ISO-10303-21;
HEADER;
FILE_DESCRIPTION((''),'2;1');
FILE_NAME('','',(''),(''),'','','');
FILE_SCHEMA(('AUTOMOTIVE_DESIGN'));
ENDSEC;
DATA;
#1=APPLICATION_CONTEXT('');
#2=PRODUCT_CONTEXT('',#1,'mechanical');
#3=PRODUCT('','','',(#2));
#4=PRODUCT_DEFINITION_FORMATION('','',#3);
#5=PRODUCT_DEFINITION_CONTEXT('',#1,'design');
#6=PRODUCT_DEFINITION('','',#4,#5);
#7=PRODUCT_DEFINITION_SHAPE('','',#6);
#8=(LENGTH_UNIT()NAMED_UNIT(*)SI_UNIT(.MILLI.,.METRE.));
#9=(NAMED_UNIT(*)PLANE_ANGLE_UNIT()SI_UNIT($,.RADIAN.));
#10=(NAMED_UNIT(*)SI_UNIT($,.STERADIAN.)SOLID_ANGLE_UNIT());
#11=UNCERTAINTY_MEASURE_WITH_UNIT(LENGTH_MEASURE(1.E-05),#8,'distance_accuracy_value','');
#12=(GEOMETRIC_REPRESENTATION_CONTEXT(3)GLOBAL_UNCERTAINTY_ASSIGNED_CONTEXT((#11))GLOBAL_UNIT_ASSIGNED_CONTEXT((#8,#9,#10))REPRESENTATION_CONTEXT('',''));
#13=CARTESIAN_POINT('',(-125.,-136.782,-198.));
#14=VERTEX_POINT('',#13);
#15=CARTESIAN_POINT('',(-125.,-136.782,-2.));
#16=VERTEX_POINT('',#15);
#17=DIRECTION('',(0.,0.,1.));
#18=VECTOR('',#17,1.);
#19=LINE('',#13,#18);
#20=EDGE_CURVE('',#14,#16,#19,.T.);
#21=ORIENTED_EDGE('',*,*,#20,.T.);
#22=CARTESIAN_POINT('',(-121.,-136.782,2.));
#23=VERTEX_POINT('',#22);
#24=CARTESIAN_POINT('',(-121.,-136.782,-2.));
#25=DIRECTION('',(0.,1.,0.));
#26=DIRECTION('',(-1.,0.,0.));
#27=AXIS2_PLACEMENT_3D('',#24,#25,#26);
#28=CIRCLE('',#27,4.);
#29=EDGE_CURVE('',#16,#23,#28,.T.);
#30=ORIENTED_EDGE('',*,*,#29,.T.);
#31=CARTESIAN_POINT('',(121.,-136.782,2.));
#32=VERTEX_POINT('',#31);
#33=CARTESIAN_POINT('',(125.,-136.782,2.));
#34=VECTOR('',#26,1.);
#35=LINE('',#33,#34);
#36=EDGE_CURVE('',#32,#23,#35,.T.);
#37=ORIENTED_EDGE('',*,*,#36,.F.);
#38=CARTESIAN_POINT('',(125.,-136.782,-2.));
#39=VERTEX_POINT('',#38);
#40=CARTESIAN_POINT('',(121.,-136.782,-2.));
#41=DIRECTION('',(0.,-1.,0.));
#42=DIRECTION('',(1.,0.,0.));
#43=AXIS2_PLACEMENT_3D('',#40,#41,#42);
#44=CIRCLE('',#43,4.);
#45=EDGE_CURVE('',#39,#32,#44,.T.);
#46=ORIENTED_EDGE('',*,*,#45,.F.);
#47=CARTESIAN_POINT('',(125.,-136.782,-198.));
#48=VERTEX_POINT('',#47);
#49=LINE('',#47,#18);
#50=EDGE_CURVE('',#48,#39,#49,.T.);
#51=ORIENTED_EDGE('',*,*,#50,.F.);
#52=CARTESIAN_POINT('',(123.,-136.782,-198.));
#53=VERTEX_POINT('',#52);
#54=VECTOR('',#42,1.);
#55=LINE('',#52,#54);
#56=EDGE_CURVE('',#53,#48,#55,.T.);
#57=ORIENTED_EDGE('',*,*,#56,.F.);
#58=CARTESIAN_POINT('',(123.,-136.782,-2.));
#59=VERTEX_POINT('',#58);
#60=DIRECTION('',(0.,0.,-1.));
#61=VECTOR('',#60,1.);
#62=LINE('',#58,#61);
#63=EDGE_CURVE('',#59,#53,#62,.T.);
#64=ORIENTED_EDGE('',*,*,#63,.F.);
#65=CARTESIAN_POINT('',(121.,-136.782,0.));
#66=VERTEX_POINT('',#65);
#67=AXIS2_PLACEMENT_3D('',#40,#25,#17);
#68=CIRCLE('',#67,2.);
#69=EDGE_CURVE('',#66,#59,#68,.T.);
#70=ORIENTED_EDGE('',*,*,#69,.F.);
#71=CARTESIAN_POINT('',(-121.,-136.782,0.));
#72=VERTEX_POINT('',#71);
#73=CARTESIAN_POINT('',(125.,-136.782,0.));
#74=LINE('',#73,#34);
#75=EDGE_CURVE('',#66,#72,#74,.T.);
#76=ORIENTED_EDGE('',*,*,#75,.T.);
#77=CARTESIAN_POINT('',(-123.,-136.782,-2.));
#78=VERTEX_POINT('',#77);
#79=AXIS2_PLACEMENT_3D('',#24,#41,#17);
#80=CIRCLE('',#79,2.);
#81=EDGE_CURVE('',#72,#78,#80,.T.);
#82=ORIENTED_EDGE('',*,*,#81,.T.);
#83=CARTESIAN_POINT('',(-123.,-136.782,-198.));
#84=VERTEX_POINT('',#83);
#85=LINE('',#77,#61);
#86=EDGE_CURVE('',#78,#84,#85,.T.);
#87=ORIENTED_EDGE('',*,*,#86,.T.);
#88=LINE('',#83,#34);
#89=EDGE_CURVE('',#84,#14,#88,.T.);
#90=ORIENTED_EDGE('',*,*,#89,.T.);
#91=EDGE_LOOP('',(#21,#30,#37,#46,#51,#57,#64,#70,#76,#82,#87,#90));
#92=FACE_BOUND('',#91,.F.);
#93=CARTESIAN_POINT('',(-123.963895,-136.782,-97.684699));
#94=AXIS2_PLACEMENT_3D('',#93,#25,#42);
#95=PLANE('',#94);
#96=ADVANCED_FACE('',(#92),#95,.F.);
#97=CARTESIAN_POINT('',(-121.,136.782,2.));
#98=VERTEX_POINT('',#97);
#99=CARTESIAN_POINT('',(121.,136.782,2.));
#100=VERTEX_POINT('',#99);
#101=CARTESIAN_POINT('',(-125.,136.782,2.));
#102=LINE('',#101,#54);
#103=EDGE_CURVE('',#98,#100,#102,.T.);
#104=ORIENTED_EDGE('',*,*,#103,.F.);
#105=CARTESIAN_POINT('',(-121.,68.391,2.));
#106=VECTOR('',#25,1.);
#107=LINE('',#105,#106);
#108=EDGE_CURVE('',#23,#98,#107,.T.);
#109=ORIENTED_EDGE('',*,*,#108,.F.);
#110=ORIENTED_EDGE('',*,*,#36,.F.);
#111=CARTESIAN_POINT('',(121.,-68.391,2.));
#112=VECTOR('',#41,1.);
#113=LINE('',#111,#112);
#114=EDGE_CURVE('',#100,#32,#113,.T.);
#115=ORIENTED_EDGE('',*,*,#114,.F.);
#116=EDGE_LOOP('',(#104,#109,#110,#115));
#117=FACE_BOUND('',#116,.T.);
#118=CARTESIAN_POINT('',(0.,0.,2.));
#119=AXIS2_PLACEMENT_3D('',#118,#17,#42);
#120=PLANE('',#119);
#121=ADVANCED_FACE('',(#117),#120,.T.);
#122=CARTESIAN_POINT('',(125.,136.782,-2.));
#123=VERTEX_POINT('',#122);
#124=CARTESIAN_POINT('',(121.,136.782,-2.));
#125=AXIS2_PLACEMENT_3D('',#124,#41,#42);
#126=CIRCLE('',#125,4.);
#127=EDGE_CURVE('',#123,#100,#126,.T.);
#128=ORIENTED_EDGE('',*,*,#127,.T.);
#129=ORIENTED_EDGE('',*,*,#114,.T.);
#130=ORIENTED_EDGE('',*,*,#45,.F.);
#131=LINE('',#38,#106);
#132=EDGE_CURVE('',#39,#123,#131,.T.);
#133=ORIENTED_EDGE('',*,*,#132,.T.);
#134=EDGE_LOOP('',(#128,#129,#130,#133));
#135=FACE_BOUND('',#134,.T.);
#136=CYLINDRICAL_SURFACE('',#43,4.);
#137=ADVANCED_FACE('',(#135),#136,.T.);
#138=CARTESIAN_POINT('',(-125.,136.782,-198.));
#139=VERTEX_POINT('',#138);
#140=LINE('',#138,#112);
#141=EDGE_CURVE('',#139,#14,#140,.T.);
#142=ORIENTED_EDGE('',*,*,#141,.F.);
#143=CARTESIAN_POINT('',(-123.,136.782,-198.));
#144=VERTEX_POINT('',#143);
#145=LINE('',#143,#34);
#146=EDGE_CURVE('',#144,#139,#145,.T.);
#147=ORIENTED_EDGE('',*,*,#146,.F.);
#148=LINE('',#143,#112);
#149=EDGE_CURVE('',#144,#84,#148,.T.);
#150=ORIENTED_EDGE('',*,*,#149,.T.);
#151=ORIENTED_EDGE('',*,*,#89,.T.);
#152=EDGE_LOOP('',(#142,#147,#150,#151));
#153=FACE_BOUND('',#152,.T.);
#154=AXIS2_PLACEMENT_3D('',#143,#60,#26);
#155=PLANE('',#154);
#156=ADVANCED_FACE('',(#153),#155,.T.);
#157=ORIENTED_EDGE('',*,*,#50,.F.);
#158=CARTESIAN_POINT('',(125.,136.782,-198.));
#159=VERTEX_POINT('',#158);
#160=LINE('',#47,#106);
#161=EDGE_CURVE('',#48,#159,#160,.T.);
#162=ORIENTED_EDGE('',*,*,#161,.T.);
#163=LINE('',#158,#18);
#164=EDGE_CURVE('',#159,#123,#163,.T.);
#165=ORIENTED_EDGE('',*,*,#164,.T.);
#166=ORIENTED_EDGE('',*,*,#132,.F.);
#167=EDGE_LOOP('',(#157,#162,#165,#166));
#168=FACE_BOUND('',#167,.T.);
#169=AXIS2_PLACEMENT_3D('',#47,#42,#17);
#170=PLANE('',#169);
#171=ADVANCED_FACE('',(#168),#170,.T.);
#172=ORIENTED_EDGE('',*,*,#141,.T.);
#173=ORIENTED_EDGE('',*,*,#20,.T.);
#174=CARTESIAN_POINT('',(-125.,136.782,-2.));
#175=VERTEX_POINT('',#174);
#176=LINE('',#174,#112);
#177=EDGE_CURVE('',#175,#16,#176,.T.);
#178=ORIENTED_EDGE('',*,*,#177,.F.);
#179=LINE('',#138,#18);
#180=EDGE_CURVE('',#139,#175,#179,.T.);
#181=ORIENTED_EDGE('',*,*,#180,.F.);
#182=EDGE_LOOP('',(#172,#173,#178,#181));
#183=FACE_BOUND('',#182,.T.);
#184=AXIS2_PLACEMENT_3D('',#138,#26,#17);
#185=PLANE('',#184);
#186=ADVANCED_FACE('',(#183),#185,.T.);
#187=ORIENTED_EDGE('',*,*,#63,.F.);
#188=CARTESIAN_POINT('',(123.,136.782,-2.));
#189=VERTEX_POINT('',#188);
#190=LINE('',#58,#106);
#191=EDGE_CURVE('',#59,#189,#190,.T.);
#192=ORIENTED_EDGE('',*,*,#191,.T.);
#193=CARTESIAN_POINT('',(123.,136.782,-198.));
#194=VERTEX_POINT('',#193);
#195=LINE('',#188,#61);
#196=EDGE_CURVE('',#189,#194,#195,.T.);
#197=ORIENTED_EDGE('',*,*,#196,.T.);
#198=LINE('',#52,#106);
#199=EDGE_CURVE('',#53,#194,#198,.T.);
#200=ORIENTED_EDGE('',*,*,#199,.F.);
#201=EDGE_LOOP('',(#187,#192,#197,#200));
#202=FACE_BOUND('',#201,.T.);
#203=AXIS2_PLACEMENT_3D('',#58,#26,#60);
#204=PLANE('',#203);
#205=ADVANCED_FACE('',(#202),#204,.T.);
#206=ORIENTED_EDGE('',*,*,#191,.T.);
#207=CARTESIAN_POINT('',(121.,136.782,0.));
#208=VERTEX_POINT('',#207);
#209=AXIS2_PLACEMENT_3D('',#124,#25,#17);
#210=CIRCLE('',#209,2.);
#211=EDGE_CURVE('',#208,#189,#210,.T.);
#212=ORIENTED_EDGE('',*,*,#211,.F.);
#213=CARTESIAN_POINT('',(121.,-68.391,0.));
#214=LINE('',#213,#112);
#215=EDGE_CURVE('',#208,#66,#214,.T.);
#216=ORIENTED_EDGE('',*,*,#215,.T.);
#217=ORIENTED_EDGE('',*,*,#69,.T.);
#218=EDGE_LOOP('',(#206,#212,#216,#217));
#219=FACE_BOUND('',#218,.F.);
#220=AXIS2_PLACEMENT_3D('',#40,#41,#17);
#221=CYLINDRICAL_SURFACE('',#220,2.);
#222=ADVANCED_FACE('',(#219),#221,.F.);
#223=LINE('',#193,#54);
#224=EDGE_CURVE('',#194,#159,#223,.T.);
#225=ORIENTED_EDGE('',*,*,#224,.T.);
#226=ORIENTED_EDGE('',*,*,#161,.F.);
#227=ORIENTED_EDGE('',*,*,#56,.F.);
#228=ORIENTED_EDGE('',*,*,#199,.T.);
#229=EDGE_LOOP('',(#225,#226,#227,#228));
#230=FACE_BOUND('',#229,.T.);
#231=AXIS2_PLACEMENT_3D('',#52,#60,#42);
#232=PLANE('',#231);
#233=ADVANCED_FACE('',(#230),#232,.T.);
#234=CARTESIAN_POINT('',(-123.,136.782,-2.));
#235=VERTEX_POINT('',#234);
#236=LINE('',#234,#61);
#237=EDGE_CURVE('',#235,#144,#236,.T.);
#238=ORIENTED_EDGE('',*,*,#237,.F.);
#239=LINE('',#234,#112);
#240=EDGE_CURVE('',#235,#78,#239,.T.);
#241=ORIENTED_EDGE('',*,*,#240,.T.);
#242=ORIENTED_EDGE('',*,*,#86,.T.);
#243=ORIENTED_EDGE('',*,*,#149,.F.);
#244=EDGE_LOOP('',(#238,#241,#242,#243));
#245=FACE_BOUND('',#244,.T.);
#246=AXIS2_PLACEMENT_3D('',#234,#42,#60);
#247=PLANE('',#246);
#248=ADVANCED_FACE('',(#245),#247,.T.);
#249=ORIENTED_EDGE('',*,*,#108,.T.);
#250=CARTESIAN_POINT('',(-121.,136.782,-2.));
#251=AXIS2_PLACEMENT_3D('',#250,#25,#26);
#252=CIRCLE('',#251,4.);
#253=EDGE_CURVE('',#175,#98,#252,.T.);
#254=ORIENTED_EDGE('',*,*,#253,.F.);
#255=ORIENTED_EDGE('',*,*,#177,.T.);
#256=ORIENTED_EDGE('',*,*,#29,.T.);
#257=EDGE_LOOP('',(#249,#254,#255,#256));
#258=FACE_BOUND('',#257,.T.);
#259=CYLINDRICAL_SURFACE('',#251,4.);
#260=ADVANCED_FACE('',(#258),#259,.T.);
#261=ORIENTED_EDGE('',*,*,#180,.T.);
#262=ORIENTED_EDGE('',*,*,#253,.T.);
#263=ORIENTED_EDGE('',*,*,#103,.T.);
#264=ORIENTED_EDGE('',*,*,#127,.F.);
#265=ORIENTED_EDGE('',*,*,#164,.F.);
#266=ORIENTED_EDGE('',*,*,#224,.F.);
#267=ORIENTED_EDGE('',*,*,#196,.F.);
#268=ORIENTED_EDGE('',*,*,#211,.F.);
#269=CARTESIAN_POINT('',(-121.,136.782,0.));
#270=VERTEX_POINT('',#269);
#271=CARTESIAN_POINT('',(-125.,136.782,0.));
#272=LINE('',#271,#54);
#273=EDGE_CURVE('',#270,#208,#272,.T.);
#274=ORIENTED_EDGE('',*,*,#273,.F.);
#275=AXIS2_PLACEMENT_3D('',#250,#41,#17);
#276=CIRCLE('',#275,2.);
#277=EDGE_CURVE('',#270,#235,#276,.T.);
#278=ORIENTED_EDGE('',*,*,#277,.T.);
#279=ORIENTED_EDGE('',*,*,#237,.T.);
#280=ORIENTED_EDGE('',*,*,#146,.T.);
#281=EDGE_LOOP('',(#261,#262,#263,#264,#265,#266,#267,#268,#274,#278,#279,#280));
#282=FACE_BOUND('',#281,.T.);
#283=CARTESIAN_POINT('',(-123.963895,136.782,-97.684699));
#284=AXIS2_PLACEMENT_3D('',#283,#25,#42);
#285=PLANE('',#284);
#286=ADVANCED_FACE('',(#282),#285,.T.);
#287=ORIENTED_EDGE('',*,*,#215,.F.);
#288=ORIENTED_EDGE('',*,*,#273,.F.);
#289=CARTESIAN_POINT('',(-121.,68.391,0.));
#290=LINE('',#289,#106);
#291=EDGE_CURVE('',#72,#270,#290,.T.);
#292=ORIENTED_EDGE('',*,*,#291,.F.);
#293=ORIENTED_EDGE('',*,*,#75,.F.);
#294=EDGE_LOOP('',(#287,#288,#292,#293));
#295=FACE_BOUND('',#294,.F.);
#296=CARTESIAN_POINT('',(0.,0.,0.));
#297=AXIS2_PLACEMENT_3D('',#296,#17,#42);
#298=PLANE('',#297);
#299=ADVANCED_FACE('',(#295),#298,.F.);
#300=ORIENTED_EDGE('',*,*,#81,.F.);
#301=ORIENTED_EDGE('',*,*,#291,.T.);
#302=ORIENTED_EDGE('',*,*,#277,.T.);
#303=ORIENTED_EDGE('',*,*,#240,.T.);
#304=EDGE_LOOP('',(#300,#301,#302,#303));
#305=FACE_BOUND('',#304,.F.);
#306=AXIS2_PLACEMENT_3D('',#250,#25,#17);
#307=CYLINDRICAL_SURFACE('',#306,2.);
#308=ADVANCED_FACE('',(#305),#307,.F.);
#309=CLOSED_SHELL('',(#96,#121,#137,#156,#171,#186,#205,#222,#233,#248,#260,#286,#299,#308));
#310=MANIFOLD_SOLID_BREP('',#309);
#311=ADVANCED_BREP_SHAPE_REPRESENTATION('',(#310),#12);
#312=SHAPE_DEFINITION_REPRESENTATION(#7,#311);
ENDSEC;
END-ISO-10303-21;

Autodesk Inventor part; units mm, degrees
ref_plane "YZ Plane" through (0, 0, 0) normal (1, 0, 0) x (0, 1, 0)
ref_plane "XZ Plane" through (0, 0, 0) normal (0, 1, 0) x (-1, 0, 0)
ref_plane "XY Plane" through (0, 0, 0) normal (0, 0, 1) x (1, 0, 0)
sketch "Sketch1" plane through (0, 0, 0) normal (0, 0, 1) x (1, 0, 0)
  line L0 (125, -136.782) -> (-125, -136.782)
  line L1 (-125, -136.782) -> (-125, 136.782)
  line L2 (-125, 136.782) -> (125, 136.782)
  line L3 (125, 136.782) -> (125, -136.782)
  line L4 (125, -136.782) -> (-125, 136.782) construction
  line L5 (-125, -136.782) -> (125, 136.782) construction
  point P0 (0, 0)
  dimension "d1" = 250
extrude "Plate1" add sketch "Sketch1" along normal blind 2
sketch "Sketch2" plane through (123, -136.782, 2) normal (1, 0, 0) x (0, 1, 0)
  line L0 (273.5641, 0) -> (0, 0)
  line L1 (0, 0) -> (0, -200)
  line L2 (0, -200) -> (273.5641, -200)
  line L3 (273.5641, -200) -> (273.5641, 0)
edge flange "Flange1" height 200 angle 90 thickness 2 bend radius 2 thickness toward (1, 0, 0) relief tear relief width 2 relief depth 1 edges at (125, 0, 0) wall of the first edge with corners at (123, 136.782, 2) (123, -136.782, 2) (123, -136.782, -198) (123, 136.782, -198)
bend "Bend1"
corner "Corner1"
sketch "Sketch3" plane through (-123, 136.782, 2) normal (-1, 0, 0) x (0, -1, 0)
  line L0 (273.5641, 0) -> (0, 0)
  line L1 (0, 0) -> (0, -200)
  line L2 (0, -200) -> (273.5641, -200)
  line L3 (273.5641, -200) -> (273.5641, 0)
edge flange "Flange2" height 200 angle 90 thickness 2 bend radius 2 thickness toward (-1, 0, 0) relief tear relief width 2 relief depth 1 edges at (-125, 0, 0) wall of the first edge with corners at (-123, -136.782, 2) (-123, 136.782, 2) (-123, 136.782, -198) (-123, -136.782, -198)
bend "Bend2"
corner "Corner2"
equation "\"d0\" = Thickness"
equation "\"d2\" = BendReliefWidth"
equation "\"d3\" = BendReliefDepth"
equation "\"d4\" = MinimumRemnant"
equation "\"d5\" = TransitionRadius"
equation "\"d8\" = BendRadius"
equation "\"d9\" = CornerReliefSize"
equation "\"d10\" = GapSize"
equation "\"d11\" = JacobiRadiusSize"
equation "\"d12\" = BendReliefWidth"
equation "\"d13\" = BendReliefDepth"
equation "\"d14\" = MinimumRemnant"
equation "\"d15\" = TransitionRadius"
equation "\"d18\" = BendRadius"
equation "\"d19\" = CornerReliefSize"
equation "\"d20\" = GapSize"
equation "\"d21\" = JacobiRadiusSize"
equation "\"BendRadius\" = Thickness"
equation "\"BendReliefWidth\" = Thickness"
equation "\"BendReliefDepth\" = 0.5 * Thickness"
equation "\"CornerReliefSize\" = 4 * Thickness"
equation "\"MinimumRemnant\" = 2 * Thickness"
equation "\"TransitionRadius\" = BendRadius"
equation "\"JacobiRadiusSize\" = BendRadius"
equation "\"GapSize\" = Thickness"
equation "\"Thickness\" = 2"
